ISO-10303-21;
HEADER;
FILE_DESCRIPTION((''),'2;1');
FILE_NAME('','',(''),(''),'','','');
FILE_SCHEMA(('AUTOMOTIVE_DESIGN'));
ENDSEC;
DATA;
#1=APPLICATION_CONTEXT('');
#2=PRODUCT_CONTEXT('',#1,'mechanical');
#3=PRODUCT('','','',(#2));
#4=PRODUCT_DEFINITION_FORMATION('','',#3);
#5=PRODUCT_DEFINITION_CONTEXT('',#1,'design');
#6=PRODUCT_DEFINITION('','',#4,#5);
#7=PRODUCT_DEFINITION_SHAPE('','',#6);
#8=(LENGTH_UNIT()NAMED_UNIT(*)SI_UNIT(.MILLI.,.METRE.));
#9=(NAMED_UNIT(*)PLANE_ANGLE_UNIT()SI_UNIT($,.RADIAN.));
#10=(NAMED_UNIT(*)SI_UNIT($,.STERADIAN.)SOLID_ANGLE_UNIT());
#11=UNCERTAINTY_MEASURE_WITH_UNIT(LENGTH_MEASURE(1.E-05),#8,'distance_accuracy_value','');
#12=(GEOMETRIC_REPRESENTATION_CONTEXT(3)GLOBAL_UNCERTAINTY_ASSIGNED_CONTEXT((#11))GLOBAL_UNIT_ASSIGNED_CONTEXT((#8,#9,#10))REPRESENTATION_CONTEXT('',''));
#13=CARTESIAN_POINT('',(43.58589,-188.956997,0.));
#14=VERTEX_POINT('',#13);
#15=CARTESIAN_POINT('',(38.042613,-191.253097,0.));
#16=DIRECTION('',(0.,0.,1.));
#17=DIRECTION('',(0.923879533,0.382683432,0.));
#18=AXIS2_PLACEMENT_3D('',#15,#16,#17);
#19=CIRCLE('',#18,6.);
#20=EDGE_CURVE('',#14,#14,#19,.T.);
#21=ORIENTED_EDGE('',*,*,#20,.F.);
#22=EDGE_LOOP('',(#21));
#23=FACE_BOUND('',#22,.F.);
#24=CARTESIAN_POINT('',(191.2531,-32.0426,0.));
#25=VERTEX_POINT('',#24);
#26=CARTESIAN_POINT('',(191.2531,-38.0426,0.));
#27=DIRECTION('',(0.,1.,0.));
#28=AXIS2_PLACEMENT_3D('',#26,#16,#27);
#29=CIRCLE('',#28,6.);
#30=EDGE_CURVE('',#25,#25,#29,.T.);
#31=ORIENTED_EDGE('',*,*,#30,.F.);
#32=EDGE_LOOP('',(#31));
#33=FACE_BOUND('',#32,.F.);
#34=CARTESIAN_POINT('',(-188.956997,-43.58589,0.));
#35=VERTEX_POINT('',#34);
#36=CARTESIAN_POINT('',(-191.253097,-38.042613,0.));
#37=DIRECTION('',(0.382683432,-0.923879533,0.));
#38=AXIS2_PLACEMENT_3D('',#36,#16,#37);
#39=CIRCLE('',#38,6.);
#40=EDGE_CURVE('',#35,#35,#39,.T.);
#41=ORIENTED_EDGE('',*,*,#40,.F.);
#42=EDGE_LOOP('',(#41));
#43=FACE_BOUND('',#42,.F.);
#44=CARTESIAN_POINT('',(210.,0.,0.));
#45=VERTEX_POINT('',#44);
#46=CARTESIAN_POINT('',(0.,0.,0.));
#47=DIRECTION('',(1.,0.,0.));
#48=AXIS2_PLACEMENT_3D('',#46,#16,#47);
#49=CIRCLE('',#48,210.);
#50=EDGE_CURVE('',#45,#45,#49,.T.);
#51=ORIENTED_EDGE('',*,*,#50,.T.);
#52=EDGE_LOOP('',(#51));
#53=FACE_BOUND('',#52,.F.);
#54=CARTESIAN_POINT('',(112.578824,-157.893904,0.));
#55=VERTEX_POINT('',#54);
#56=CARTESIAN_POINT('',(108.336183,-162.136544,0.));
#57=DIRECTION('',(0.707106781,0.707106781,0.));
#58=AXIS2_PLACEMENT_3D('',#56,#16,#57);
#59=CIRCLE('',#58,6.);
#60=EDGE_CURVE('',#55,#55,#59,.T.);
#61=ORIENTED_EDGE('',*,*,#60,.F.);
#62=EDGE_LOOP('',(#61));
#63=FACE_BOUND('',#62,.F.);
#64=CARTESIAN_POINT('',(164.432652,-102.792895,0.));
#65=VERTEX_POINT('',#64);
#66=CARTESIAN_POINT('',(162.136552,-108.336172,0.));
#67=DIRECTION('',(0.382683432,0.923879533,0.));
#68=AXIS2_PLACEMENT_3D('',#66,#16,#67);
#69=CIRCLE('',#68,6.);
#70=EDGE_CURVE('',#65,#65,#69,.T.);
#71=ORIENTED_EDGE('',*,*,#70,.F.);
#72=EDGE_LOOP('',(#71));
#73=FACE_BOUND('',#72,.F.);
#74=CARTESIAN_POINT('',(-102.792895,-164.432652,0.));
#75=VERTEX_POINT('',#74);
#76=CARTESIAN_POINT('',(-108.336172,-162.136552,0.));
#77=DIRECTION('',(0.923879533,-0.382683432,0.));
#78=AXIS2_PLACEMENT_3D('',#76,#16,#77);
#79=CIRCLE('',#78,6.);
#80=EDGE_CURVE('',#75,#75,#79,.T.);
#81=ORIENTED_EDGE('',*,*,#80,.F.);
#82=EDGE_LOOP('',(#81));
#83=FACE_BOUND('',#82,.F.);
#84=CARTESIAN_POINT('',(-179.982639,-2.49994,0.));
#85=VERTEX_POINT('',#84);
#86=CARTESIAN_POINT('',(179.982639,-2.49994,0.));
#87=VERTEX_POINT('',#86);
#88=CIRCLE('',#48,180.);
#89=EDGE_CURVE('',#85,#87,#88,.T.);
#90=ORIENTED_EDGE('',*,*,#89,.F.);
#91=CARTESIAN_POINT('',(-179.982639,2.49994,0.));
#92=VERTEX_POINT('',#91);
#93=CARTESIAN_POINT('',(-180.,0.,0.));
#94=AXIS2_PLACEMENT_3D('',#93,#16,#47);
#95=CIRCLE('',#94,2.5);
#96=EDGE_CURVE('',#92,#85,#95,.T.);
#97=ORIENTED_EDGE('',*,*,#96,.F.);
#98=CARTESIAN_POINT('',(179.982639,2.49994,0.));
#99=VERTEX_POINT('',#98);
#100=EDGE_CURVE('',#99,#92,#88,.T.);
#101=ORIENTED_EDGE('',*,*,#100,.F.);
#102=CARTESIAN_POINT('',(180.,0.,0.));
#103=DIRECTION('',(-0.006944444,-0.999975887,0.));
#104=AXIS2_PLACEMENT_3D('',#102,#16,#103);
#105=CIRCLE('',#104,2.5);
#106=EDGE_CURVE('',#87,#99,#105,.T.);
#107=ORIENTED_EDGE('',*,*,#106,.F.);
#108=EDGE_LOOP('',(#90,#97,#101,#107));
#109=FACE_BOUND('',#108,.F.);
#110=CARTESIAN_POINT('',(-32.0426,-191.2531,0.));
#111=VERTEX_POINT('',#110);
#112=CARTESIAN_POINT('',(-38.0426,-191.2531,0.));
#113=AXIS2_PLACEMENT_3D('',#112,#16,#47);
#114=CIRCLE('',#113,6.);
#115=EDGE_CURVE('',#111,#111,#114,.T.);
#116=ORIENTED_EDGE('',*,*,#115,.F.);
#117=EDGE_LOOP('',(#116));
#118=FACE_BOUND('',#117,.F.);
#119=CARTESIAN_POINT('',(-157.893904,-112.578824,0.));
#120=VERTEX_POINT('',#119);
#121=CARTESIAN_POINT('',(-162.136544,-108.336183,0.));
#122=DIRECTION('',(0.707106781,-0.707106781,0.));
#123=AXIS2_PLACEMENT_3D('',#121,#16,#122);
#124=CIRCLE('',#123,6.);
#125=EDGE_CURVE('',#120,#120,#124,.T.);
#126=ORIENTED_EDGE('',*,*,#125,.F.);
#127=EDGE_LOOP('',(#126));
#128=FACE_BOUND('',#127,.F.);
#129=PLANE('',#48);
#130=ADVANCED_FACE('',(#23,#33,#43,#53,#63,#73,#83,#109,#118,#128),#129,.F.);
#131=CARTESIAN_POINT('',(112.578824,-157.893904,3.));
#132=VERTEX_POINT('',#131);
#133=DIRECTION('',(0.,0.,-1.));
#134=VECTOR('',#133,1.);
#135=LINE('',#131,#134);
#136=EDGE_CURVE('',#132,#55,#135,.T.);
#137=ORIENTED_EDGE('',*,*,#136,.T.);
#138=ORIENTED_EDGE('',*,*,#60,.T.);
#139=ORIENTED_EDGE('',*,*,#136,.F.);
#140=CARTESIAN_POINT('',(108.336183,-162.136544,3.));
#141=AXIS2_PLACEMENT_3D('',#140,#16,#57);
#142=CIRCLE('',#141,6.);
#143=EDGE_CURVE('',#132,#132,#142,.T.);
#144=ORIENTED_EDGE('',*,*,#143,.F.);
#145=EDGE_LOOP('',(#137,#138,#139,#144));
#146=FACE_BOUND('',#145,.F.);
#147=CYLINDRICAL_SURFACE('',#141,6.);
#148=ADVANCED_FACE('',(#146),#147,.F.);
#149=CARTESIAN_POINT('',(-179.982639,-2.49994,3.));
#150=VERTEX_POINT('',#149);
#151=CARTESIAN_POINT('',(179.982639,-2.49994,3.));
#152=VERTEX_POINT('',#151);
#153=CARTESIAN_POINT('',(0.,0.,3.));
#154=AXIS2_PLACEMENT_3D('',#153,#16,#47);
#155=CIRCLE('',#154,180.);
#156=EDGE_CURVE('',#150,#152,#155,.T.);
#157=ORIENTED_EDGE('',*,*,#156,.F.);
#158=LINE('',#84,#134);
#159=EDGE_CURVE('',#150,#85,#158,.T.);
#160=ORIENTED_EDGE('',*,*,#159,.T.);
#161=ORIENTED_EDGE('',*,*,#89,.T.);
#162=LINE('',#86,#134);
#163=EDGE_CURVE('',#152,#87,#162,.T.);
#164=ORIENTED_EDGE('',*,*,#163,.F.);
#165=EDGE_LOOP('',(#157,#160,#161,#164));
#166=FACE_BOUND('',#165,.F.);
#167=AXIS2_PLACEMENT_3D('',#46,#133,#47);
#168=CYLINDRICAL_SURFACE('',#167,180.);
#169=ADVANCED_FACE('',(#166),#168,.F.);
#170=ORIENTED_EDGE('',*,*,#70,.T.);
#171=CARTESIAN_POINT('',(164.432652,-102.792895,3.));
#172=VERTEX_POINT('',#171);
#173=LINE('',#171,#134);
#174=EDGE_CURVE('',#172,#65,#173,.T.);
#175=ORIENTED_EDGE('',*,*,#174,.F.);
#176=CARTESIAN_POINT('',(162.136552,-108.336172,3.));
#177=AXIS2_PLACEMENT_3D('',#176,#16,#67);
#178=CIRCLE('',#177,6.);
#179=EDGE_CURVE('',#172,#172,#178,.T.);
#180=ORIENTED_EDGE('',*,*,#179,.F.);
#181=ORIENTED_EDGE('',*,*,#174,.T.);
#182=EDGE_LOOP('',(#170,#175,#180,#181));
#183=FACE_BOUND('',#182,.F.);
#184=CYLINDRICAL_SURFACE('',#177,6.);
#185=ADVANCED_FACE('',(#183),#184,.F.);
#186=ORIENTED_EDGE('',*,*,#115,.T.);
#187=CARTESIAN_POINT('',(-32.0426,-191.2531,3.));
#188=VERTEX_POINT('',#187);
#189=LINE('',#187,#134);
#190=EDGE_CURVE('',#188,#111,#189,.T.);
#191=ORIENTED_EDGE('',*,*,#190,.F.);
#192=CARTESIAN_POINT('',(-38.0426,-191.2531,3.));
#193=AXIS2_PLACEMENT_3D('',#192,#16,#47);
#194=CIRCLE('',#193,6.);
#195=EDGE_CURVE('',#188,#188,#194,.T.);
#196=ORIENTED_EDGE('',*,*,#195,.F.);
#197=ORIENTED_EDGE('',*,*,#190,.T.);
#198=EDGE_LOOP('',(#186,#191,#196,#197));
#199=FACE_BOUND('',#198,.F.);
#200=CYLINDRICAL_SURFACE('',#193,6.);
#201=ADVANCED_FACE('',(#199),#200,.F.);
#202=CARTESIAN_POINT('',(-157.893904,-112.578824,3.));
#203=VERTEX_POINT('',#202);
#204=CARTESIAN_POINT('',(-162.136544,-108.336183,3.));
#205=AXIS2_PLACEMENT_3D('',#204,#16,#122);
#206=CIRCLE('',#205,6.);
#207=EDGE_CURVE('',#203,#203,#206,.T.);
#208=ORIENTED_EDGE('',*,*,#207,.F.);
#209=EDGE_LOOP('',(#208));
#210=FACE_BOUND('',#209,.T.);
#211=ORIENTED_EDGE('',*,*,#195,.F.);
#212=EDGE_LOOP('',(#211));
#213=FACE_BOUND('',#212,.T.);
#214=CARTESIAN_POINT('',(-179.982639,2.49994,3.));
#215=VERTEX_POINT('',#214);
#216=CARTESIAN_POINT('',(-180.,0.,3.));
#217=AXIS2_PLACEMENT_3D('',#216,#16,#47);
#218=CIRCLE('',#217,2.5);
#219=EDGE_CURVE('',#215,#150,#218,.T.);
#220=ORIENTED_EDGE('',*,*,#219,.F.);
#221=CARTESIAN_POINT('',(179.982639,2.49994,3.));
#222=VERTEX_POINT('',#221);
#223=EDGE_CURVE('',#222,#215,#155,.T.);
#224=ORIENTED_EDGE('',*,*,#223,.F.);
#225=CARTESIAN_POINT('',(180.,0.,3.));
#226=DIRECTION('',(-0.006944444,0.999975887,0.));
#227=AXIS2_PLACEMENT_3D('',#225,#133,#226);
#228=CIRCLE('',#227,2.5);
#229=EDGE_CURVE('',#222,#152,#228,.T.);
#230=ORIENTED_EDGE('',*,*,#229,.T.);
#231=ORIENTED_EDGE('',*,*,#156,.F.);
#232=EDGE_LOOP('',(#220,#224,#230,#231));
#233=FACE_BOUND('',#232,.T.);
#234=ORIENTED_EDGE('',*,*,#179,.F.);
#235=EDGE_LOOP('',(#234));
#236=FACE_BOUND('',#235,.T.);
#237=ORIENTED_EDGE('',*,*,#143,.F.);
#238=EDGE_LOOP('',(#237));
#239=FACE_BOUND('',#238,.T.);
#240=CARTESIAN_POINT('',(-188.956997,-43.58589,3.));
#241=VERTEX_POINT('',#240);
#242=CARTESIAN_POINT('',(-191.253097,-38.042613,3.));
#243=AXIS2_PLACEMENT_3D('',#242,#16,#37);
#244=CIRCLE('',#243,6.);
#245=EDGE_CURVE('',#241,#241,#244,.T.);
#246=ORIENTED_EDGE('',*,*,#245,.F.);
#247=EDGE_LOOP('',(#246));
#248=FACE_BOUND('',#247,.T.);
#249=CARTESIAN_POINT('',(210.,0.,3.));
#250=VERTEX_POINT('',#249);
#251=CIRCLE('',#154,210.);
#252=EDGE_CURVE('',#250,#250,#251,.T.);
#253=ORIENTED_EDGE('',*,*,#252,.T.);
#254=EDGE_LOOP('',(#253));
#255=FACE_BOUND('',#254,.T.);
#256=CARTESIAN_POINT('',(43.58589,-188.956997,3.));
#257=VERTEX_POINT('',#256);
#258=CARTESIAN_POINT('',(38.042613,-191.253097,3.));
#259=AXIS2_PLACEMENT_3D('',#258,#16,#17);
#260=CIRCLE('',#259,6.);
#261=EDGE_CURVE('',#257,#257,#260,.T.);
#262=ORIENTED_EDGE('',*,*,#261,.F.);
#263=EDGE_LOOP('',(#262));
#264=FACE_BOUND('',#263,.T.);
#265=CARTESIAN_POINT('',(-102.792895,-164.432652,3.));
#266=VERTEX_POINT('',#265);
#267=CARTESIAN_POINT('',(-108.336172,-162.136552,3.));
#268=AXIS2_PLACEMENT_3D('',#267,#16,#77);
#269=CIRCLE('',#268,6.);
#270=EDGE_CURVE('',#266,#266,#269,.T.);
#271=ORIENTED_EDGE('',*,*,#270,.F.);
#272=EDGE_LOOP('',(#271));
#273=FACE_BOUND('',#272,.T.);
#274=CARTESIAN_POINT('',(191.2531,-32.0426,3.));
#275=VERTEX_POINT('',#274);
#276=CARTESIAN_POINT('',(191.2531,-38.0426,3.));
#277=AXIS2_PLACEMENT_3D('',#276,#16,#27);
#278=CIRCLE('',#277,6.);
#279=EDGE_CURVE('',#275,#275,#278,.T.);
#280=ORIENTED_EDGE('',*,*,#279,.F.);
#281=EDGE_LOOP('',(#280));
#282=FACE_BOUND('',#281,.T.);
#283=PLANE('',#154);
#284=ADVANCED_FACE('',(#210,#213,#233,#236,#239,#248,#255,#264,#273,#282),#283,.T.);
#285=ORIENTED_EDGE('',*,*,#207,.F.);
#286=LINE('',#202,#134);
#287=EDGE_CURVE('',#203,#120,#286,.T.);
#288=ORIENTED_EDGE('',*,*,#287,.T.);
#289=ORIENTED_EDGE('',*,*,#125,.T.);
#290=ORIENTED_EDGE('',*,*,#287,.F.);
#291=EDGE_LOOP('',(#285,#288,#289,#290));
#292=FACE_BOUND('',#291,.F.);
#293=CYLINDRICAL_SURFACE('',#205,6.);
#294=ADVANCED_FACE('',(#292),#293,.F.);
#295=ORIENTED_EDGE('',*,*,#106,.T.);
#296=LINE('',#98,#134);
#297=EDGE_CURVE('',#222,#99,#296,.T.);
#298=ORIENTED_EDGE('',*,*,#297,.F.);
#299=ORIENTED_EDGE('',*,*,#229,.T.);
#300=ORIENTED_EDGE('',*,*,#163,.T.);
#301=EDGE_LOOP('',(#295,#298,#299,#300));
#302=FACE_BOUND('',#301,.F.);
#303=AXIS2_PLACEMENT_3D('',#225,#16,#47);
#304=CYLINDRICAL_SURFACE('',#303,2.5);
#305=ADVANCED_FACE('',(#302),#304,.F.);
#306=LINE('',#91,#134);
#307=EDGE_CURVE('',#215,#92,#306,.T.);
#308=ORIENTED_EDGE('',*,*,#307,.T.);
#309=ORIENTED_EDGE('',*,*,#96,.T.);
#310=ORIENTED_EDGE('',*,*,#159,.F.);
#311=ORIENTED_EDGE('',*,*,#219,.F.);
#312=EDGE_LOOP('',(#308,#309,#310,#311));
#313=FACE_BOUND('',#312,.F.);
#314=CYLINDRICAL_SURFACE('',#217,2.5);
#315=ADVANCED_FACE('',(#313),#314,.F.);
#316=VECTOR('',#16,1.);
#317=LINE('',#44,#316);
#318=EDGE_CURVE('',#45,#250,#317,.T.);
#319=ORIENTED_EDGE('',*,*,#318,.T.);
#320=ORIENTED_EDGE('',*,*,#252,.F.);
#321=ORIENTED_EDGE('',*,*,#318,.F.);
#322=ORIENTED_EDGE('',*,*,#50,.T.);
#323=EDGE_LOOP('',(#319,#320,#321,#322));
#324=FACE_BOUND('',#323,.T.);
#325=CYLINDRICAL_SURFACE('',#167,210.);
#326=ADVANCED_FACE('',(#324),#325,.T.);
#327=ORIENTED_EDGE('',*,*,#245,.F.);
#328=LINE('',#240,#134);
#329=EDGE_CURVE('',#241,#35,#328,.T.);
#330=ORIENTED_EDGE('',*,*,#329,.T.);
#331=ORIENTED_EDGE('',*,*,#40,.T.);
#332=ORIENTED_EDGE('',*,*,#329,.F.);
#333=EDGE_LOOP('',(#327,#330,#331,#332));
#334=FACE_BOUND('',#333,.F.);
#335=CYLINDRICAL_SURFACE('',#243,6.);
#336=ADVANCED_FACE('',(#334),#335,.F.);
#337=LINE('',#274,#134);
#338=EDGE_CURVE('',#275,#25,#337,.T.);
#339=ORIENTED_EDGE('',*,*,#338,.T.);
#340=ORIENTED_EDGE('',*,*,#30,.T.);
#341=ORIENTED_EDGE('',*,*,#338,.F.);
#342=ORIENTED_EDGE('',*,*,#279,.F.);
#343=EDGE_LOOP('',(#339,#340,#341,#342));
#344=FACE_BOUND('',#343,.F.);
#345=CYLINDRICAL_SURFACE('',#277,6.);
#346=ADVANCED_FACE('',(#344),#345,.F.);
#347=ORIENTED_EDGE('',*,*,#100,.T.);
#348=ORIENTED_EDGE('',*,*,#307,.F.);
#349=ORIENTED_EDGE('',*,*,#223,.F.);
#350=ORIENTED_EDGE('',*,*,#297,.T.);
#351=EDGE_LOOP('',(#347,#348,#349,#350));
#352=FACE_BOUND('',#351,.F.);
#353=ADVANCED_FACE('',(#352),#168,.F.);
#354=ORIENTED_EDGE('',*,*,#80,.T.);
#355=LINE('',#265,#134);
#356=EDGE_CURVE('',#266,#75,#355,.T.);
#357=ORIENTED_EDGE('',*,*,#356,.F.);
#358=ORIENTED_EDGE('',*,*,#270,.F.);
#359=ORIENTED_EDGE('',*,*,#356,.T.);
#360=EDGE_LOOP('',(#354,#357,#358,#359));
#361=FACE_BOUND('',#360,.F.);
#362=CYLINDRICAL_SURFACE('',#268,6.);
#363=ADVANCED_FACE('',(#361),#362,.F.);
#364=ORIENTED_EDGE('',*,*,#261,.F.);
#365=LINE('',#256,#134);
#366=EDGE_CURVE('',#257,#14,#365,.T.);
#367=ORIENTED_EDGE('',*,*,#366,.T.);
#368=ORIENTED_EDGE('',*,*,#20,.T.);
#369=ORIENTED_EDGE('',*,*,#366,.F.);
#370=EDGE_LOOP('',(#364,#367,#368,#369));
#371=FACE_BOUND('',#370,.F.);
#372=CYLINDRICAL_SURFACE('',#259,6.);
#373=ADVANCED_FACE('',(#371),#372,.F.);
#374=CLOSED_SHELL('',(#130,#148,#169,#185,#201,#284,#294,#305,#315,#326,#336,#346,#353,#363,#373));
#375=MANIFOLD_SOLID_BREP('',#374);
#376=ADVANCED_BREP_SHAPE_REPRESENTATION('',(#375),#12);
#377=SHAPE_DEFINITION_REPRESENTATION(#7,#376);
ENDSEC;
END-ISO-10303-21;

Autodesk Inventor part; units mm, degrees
ref_plane "YZ Plane" through (0, 0, 0) normal (1, 0, 0) x (0, 1, 0)
ref_plane "XZ Plane" through (0, 0, 0) normal (0, 1, 0) x (-1, 0, 0)
ref_plane "XY Plane" through (0, 0, 0) normal (0, 0, 1) x (1, 0, 0)
sketch "Sketch1" plane through (0, 0, 0) normal (0, 0, 1) x (1, 0, 0)
  circle A0 centre (0, 0) radius 180
  circle A1 centre (0, 0) radius 210
  circle A2 centre (0, 0) radius 195 construction
  line L0 (0, 210) -> (0, 180) construction
  point P0 (0, 195)
  dimension "d9" = 390
  dimension "d11" = 30
extrude "Plate1" add sketch "Sketch1" along normal blind 3
sketch "Sketch2" plane through (0, 0, 3) normal (0, 0, 1) x (1, 0, 0)
  circle A0 centre (0, 0) radius 180 construction
  circle A1 centre (0, 0) radius 210 construction
  circle A2 centre (0, 0) radius 210 projected
  circle A3 centre (0, 0) radius 180 projected
  line L0 (0, 0) -> (0, -210) construction
  line L1 (0, 0) -> (-40.969, -205.9649) construction
  line L2 (-35.1163, -176.5414) -> (-40.969, -205.9649) construction
  circle A4 centre (-38.0426, -191.2531) radius 6
  dimension "d20" = 11.25
  dimension "d21" = 12
extrude "Extrusion1" cut sketch "Sketch2" against normal through all contours A4
pattern_circular "Circular Pattern1" count 8 over 157.5 about axis through (0, 0, 0) along (0, 0, 1) of "Extrusion1" both ways yes
sketch "Sketch3" plane through (0, 0, 3) normal (0, 0, 1) x (1, 0, 0)
  circle A0 centre (0, 0) radius 180 construction
  line L0 (180, 0) -> (-180, 0) construction
  circle A1 centre (180, 0) radius 2.5
  circle A2 centre (-180, 0) radius 2.5
  circle A3 centre (-161.2452, -80) radius 2.5
  line L1 (-161.2452, -80) -> (161.2452, -80) construction
  circle A4 centre (161.2452, -80) radius 2.5
  dimension "d27" = 5
  dimension "d29" = 80
extrude "Extrusion2" cut sketch "Sketch3" against normal through all contours A1 | A2
equation "\"d9\" = Шпил_пласт_НОС_диам_центров"
equation "\"d11\" = Шпил_пласт_НОС_ширина"
equation "\"d21\" = Шпил_пласт_НОС_диам_шпильки"
equation "\"d2\" = Thickness"
equation "\"BendRadius\" = Thickness"
equation "\"BendReliefWidth\" = Thickness"
equation "\"BendReliefDepth\" = 0.5 * Thickness"
equation "\"CornerReliefSize\" = 4 * Thickness"
equation "\"MinimumRemnant\" = 2 * Thickness"
equation "\"TransitionRadius\" = BendRadius"
equation "\"JacobiRadiusSize\" = BendRadius"
equation "\"GapSize\" = Thickness"
equation "\"Шпил_пласт_НОС_диам_центров\" = 390"
equation "\"Шпил_пласт_НОС_ширина\" = 30"
equation "\"Шпил_пласт_НОС_диам_шпильки\" = 12"
equation "\"Thickness\" = 3"
properties part number "ДМФ 031 кольцо под шпильки НОС"
